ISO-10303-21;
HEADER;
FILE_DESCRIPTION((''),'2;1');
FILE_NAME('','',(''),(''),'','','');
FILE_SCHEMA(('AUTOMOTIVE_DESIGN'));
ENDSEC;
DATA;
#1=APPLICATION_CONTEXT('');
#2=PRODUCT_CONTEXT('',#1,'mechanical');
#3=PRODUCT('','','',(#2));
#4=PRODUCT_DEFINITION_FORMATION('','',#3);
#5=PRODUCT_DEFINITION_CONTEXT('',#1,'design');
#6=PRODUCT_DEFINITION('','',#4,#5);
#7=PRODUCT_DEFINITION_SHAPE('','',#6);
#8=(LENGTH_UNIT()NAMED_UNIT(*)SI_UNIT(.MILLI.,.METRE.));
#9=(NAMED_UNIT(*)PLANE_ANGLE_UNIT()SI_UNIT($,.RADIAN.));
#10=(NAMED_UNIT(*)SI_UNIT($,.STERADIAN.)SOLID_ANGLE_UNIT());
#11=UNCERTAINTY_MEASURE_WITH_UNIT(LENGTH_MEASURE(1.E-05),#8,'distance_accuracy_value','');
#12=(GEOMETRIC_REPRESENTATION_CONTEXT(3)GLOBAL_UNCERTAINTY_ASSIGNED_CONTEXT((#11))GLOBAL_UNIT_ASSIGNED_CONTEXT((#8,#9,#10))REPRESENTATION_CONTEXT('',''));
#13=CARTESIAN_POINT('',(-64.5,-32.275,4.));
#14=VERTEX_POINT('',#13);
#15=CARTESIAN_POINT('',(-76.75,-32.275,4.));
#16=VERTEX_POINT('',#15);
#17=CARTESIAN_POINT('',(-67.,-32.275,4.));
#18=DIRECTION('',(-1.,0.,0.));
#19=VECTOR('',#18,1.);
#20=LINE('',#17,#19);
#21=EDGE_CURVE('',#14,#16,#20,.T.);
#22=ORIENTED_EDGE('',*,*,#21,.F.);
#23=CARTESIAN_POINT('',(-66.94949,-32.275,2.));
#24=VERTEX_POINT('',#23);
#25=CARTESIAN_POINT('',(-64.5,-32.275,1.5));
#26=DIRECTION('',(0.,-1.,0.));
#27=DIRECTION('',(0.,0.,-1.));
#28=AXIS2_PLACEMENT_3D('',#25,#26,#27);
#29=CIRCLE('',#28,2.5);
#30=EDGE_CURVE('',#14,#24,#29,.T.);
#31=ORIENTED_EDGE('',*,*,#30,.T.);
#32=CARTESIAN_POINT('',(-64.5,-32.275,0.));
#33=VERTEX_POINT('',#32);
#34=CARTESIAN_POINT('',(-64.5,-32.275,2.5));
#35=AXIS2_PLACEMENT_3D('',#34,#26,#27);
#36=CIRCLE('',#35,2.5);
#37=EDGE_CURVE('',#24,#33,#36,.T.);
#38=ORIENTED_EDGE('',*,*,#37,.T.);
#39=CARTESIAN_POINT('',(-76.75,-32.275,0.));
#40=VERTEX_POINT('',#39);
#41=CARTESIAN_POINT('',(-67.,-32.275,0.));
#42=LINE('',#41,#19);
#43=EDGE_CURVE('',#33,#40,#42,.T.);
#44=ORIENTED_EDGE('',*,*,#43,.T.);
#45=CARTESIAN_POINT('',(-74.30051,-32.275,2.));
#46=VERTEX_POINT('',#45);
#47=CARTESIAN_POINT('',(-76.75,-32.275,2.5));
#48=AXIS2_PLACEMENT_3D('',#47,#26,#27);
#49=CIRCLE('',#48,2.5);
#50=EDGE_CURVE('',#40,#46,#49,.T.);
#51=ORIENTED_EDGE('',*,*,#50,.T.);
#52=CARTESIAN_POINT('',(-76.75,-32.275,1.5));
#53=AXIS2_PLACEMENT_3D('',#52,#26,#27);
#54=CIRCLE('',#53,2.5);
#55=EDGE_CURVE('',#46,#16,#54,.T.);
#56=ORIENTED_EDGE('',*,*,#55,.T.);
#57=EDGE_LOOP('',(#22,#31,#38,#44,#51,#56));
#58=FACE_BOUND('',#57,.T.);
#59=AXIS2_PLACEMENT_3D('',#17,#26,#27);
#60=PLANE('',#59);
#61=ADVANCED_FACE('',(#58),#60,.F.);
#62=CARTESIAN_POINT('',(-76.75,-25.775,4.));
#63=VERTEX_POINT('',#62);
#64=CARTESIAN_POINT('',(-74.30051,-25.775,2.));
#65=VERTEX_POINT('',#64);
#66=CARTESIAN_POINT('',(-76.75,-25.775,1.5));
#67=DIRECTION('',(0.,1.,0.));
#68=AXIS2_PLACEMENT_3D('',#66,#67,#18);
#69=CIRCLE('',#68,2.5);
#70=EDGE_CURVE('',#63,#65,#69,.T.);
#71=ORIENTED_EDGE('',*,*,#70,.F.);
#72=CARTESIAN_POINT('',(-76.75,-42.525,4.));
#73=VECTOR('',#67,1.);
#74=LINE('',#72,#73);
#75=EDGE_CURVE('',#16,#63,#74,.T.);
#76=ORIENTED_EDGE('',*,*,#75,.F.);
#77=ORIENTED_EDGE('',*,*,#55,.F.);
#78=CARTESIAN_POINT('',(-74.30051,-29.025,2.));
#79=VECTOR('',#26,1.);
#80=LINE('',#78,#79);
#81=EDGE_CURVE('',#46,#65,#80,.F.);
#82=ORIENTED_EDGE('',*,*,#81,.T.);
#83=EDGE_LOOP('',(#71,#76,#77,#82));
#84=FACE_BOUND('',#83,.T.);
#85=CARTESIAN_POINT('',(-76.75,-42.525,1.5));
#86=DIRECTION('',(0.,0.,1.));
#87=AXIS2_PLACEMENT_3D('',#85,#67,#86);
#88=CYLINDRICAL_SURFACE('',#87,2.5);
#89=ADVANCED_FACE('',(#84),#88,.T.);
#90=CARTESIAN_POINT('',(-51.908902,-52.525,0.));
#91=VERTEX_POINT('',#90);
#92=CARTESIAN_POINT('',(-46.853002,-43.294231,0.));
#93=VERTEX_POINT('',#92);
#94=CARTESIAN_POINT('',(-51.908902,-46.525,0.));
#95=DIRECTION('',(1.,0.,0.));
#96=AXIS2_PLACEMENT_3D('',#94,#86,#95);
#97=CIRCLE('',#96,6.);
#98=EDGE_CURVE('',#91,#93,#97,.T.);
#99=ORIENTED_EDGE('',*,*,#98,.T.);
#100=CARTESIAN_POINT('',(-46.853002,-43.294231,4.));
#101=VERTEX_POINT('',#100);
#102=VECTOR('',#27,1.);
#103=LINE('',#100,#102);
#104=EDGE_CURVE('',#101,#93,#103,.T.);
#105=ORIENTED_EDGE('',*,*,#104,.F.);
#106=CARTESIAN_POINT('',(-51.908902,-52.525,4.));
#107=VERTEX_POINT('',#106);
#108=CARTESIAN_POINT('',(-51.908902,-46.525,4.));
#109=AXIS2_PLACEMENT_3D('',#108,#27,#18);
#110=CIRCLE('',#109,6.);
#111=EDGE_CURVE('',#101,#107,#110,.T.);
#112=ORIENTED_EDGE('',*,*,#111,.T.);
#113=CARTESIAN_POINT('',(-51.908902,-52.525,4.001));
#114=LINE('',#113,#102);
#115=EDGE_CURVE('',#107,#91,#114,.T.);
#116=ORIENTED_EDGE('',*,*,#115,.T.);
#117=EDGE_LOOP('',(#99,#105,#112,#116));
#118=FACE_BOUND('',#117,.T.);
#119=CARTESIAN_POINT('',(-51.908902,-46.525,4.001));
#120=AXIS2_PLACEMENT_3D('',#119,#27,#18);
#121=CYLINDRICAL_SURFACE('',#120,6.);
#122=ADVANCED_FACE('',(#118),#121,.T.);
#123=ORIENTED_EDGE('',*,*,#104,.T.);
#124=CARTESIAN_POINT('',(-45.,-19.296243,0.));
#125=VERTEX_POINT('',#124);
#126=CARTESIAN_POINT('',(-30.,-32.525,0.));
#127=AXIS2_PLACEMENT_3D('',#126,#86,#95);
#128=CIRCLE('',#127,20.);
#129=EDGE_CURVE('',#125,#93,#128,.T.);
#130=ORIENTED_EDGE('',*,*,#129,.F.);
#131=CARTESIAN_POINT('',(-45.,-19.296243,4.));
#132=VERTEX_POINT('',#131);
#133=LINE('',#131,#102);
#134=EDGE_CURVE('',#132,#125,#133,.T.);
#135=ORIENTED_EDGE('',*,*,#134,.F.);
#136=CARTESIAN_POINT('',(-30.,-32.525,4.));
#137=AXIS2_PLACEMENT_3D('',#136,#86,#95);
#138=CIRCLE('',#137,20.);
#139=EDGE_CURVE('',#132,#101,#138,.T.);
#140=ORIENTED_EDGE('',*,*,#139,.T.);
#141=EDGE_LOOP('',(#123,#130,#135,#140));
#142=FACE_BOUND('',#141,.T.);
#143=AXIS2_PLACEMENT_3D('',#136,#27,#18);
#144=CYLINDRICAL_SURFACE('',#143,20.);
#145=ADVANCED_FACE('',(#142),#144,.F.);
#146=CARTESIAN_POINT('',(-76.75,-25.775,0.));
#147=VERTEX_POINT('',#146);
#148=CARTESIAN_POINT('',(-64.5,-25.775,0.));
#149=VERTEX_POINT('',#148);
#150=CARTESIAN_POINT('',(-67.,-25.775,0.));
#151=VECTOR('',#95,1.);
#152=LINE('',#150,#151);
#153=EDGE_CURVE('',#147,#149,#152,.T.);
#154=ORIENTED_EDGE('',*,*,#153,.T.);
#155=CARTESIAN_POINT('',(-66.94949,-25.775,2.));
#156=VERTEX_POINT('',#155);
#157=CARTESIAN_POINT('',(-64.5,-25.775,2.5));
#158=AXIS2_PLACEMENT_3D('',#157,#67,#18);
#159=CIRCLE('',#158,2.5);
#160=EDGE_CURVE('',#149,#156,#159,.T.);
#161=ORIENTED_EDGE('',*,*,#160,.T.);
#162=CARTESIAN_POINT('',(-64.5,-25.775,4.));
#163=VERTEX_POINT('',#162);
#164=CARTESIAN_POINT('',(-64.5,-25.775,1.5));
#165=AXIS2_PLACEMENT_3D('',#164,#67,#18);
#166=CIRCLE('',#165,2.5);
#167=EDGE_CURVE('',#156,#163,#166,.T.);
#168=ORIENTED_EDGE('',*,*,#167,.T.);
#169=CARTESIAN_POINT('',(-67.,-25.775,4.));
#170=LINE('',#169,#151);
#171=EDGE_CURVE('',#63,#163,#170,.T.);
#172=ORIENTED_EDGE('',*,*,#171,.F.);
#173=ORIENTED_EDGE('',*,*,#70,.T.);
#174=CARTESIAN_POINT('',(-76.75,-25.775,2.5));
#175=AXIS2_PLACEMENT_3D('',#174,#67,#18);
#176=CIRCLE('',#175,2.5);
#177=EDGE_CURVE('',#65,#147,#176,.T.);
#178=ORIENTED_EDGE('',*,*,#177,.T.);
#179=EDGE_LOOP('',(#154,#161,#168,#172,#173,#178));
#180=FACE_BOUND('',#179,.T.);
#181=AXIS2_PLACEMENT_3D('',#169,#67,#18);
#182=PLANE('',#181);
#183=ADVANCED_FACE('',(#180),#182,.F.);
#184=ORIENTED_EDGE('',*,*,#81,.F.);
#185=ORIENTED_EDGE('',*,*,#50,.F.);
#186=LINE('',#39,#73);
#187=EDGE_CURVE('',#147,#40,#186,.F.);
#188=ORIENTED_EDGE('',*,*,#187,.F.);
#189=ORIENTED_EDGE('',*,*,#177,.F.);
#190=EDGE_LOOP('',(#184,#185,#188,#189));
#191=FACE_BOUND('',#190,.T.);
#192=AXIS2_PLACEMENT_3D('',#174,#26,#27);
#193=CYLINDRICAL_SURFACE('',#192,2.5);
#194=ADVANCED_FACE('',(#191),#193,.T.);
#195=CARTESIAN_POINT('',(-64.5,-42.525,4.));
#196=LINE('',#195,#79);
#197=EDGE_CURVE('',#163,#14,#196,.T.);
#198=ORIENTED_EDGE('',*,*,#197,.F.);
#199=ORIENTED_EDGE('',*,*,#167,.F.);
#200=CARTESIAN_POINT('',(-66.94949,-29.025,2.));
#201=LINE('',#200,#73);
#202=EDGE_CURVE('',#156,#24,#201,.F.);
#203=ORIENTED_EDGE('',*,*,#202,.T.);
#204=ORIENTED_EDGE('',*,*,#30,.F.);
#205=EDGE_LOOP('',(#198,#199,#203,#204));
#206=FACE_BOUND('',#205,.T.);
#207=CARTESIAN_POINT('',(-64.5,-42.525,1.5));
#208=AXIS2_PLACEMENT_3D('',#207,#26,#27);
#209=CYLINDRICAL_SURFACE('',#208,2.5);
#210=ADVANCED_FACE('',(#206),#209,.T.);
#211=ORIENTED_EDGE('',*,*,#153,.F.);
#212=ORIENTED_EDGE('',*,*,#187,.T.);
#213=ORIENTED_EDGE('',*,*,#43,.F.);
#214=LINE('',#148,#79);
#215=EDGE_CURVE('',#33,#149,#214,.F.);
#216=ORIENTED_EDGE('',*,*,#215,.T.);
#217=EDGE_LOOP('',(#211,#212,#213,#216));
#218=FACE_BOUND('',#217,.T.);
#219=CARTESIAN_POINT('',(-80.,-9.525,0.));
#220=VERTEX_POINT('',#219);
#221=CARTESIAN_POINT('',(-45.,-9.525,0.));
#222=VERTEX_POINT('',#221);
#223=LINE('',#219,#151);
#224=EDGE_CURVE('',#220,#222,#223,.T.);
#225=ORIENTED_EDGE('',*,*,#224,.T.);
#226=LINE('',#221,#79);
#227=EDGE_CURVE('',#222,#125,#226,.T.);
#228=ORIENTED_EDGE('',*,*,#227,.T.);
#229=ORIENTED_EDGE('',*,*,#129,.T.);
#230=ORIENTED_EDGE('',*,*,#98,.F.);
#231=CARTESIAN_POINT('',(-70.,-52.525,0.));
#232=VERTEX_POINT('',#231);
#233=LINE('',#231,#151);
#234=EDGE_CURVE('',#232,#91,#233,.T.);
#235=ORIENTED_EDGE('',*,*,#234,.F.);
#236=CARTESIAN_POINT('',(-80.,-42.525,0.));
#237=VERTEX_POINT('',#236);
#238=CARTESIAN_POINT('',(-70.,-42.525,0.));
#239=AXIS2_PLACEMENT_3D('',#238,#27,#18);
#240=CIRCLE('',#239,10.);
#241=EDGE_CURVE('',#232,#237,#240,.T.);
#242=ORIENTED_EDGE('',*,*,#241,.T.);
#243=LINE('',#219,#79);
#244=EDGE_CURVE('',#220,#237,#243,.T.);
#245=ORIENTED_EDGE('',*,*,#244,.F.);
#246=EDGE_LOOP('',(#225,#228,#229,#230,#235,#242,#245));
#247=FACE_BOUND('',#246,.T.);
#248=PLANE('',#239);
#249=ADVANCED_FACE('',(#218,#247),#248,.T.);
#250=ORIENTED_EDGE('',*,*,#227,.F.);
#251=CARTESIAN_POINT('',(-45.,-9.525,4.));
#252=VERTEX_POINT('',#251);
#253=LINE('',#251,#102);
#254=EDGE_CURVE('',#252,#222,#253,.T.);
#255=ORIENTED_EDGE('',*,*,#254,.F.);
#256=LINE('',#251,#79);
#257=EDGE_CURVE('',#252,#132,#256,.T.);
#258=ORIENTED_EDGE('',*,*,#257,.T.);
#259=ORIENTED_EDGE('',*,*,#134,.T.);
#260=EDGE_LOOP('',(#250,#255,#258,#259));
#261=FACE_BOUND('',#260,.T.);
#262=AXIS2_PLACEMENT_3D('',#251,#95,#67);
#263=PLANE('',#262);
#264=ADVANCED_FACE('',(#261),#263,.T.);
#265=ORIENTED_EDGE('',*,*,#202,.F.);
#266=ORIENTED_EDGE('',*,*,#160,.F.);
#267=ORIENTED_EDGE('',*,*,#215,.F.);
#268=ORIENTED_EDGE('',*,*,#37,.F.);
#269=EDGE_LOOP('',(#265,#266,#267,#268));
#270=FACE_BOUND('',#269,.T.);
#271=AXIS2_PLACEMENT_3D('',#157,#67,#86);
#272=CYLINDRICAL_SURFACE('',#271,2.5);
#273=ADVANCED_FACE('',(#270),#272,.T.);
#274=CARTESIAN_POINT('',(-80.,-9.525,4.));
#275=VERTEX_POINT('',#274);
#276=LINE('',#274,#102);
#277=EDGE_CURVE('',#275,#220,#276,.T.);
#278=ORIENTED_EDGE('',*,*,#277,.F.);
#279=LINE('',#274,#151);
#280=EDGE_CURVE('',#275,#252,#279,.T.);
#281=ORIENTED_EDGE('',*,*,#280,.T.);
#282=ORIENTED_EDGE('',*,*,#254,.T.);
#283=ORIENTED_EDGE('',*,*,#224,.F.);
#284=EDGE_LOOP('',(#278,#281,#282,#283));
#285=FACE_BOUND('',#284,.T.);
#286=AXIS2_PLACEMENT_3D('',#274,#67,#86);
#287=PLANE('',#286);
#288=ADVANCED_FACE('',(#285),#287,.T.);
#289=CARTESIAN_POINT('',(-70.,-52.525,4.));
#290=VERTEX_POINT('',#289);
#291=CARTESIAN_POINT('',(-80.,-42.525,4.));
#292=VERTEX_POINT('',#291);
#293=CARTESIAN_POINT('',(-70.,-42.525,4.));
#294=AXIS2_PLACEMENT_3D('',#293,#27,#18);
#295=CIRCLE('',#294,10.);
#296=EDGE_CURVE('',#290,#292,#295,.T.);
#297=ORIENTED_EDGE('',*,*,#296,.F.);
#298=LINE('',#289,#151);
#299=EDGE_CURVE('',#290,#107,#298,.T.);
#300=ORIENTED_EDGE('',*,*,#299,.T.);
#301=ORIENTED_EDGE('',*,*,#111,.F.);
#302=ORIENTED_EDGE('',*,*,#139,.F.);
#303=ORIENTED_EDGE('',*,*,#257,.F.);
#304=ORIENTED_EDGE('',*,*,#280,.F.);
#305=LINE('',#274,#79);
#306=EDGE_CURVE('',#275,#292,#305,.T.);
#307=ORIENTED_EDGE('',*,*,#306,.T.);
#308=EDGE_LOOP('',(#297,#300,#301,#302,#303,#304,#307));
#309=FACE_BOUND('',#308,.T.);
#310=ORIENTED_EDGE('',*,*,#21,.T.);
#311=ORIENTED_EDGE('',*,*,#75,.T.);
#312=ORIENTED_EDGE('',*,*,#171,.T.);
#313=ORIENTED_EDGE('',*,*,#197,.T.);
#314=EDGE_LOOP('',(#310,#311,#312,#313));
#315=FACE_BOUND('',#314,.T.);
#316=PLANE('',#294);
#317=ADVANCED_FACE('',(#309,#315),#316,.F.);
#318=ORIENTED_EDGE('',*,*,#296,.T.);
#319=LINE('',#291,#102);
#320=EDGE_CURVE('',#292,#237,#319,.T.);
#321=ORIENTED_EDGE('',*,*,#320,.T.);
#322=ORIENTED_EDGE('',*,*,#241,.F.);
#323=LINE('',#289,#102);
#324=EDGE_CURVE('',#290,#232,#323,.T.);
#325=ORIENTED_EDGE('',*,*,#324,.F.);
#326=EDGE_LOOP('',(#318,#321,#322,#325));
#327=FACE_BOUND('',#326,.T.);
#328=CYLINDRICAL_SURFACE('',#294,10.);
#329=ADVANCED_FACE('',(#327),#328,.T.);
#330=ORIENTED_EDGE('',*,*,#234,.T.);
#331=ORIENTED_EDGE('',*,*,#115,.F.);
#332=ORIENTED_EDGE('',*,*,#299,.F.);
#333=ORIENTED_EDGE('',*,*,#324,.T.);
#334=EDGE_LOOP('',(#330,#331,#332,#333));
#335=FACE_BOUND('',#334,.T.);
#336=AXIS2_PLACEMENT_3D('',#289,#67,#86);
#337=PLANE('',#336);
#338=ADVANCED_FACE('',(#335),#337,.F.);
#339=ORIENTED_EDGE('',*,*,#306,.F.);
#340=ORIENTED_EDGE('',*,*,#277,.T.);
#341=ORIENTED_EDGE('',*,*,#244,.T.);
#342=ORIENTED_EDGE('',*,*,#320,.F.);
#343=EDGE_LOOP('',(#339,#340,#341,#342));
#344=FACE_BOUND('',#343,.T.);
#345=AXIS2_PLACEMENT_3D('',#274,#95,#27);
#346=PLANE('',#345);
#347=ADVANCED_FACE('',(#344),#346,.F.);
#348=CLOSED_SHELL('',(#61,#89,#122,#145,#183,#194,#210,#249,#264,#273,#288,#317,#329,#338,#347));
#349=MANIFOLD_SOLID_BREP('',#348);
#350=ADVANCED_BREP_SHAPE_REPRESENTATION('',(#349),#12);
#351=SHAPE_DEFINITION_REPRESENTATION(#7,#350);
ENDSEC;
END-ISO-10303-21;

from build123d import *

# Parameters (mm, degrees)
BOSS_EXTRU_1_DEPTH      = 4
ESQUISSE2_W             = 7.25
ESQUISSE2_H             = 6.5
ENL_V_MAT_EXTRU_1_DEPTH = 96.785571069
CONG_1_R                = 2.5
CUT_EXTRUDE1_REACH      = 97.786


with BuildPart() as part:
    # Esquisse1 → Boss.-Extru.1 (new body)
    with BuildSketch(Plane.XY):
        with BuildLine():
            Line((-34.444097209, -52.025), (-34.444097209, -52.525))
            Line((-34.444097209, -52.525), (-70, -52.525))
            ThreePointArc((-70, -52.525), (-77.071067812, -49.596067812), (-80, -42.525))
            Line((-80, -42.525), (-80, -9.525))
            Line((-80, -9.525), (-45, -9.525))
            Line((-45, -9.525), (-45, -19.296243445))
            ThreePointArc((-45, -19.296243445), (-49.034471505, -38.664128156), (-34.444097209, -52.025))
        make_face()
    extrude(amount=BOSS_EXTRU_1_DEPTH)

    # Esquisse2 → Enlèv. mat.-Extru.1 (cut, through all)
    with BuildSketch(Plane(origin=(0, 0, 0), x_dir=(-1, 0, 0), z_dir=(0, 0, -1))):
        with Locations((70.625, -29.025)):
            Rectangle(ESQUISSE2_W, ESQUISSE2_H)
    extrude(amount=-ENL_V_MAT_EXTRU_1_DEPTH, mode=Mode.SUBTRACT)

    # Congé1
    # the kernel refuses this fillet: 2.5 mm, written as the material it takes off along each edge
    with BuildSketch(Plane(origin=(-74.25, -25.775, 4), x_dir=(-1, 0, 0), z_dir=(0, -1, 0)), Plane(origin=(-67, -32.275, 4), x_dir=(1, 0, 0), z_dir=(0, 1, 0))) as cong_1_piece_1:
        with BuildLine():
            CenterArc((CONG_1_R, CONG_1_R), CONG_1_R, 180, 90)
            Line((0, CONG_1_R), (0, 0))
            Line((0, 0), (CONG_1_R, 0))
        make_face()
    extrude(amount=6.5, mode=Mode.SUBTRACT)
    with BuildSketch(Plane(origin=(-74.25, -25.775, 0), x_dir=(-1, 0, 0), z_dir=(0, -1, 0)), Plane(origin=(-67, -32.275, 0), x_dir=(1, 0, 0), z_dir=(0, 1, 0))) as cong_1_piece_2:
        with BuildLine():
            CenterArc((CONG_1_R, -CONG_1_R), CONG_1_R, 90, 90)
            Line((0, -CONG_1_R), (0, 0))
            Line((0, 0), (CONG_1_R, 0))
        make_face()
    extrude(amount=6.5, mode=Mode.SUBTRACT)

    # Sketch1 → Cut-Extrude1 (cut, up to next)
    with BuildSketch(Plane(origin=(0, 0, 0), x_dir=(-1, 0, 0), z_dir=(0, 0, -1)), mode=Mode.PRIVATE) as cut_extrude1_sk1:
        with BuildLine():
            Line((51.9089023, -52.525), (34.444097209, -52.525))
            Line((34.444097209, -52.525), (34.444097209, -52.025))
            Line((34.444097209, -52.025), (46.853001769, -43.294230769))
            ThreePointArc((46.853001769, -43.294230769), (46.646554184, -49.407306768), (51.9089023, -52.525))
        make_face()
    cut_extrude1_tool1 = extrude(cut_extrude1_sk1.sketch, amount=-CUT_EXTRUDE1_REACH, mode=Mode.PRIVATE) & part.part
    add(cut_extrude1_tool1.solids().sort_by_distance((-42.611695, -49.79665, 0))[0], mode=Mode.SUBTRACT)


solid = part.part
